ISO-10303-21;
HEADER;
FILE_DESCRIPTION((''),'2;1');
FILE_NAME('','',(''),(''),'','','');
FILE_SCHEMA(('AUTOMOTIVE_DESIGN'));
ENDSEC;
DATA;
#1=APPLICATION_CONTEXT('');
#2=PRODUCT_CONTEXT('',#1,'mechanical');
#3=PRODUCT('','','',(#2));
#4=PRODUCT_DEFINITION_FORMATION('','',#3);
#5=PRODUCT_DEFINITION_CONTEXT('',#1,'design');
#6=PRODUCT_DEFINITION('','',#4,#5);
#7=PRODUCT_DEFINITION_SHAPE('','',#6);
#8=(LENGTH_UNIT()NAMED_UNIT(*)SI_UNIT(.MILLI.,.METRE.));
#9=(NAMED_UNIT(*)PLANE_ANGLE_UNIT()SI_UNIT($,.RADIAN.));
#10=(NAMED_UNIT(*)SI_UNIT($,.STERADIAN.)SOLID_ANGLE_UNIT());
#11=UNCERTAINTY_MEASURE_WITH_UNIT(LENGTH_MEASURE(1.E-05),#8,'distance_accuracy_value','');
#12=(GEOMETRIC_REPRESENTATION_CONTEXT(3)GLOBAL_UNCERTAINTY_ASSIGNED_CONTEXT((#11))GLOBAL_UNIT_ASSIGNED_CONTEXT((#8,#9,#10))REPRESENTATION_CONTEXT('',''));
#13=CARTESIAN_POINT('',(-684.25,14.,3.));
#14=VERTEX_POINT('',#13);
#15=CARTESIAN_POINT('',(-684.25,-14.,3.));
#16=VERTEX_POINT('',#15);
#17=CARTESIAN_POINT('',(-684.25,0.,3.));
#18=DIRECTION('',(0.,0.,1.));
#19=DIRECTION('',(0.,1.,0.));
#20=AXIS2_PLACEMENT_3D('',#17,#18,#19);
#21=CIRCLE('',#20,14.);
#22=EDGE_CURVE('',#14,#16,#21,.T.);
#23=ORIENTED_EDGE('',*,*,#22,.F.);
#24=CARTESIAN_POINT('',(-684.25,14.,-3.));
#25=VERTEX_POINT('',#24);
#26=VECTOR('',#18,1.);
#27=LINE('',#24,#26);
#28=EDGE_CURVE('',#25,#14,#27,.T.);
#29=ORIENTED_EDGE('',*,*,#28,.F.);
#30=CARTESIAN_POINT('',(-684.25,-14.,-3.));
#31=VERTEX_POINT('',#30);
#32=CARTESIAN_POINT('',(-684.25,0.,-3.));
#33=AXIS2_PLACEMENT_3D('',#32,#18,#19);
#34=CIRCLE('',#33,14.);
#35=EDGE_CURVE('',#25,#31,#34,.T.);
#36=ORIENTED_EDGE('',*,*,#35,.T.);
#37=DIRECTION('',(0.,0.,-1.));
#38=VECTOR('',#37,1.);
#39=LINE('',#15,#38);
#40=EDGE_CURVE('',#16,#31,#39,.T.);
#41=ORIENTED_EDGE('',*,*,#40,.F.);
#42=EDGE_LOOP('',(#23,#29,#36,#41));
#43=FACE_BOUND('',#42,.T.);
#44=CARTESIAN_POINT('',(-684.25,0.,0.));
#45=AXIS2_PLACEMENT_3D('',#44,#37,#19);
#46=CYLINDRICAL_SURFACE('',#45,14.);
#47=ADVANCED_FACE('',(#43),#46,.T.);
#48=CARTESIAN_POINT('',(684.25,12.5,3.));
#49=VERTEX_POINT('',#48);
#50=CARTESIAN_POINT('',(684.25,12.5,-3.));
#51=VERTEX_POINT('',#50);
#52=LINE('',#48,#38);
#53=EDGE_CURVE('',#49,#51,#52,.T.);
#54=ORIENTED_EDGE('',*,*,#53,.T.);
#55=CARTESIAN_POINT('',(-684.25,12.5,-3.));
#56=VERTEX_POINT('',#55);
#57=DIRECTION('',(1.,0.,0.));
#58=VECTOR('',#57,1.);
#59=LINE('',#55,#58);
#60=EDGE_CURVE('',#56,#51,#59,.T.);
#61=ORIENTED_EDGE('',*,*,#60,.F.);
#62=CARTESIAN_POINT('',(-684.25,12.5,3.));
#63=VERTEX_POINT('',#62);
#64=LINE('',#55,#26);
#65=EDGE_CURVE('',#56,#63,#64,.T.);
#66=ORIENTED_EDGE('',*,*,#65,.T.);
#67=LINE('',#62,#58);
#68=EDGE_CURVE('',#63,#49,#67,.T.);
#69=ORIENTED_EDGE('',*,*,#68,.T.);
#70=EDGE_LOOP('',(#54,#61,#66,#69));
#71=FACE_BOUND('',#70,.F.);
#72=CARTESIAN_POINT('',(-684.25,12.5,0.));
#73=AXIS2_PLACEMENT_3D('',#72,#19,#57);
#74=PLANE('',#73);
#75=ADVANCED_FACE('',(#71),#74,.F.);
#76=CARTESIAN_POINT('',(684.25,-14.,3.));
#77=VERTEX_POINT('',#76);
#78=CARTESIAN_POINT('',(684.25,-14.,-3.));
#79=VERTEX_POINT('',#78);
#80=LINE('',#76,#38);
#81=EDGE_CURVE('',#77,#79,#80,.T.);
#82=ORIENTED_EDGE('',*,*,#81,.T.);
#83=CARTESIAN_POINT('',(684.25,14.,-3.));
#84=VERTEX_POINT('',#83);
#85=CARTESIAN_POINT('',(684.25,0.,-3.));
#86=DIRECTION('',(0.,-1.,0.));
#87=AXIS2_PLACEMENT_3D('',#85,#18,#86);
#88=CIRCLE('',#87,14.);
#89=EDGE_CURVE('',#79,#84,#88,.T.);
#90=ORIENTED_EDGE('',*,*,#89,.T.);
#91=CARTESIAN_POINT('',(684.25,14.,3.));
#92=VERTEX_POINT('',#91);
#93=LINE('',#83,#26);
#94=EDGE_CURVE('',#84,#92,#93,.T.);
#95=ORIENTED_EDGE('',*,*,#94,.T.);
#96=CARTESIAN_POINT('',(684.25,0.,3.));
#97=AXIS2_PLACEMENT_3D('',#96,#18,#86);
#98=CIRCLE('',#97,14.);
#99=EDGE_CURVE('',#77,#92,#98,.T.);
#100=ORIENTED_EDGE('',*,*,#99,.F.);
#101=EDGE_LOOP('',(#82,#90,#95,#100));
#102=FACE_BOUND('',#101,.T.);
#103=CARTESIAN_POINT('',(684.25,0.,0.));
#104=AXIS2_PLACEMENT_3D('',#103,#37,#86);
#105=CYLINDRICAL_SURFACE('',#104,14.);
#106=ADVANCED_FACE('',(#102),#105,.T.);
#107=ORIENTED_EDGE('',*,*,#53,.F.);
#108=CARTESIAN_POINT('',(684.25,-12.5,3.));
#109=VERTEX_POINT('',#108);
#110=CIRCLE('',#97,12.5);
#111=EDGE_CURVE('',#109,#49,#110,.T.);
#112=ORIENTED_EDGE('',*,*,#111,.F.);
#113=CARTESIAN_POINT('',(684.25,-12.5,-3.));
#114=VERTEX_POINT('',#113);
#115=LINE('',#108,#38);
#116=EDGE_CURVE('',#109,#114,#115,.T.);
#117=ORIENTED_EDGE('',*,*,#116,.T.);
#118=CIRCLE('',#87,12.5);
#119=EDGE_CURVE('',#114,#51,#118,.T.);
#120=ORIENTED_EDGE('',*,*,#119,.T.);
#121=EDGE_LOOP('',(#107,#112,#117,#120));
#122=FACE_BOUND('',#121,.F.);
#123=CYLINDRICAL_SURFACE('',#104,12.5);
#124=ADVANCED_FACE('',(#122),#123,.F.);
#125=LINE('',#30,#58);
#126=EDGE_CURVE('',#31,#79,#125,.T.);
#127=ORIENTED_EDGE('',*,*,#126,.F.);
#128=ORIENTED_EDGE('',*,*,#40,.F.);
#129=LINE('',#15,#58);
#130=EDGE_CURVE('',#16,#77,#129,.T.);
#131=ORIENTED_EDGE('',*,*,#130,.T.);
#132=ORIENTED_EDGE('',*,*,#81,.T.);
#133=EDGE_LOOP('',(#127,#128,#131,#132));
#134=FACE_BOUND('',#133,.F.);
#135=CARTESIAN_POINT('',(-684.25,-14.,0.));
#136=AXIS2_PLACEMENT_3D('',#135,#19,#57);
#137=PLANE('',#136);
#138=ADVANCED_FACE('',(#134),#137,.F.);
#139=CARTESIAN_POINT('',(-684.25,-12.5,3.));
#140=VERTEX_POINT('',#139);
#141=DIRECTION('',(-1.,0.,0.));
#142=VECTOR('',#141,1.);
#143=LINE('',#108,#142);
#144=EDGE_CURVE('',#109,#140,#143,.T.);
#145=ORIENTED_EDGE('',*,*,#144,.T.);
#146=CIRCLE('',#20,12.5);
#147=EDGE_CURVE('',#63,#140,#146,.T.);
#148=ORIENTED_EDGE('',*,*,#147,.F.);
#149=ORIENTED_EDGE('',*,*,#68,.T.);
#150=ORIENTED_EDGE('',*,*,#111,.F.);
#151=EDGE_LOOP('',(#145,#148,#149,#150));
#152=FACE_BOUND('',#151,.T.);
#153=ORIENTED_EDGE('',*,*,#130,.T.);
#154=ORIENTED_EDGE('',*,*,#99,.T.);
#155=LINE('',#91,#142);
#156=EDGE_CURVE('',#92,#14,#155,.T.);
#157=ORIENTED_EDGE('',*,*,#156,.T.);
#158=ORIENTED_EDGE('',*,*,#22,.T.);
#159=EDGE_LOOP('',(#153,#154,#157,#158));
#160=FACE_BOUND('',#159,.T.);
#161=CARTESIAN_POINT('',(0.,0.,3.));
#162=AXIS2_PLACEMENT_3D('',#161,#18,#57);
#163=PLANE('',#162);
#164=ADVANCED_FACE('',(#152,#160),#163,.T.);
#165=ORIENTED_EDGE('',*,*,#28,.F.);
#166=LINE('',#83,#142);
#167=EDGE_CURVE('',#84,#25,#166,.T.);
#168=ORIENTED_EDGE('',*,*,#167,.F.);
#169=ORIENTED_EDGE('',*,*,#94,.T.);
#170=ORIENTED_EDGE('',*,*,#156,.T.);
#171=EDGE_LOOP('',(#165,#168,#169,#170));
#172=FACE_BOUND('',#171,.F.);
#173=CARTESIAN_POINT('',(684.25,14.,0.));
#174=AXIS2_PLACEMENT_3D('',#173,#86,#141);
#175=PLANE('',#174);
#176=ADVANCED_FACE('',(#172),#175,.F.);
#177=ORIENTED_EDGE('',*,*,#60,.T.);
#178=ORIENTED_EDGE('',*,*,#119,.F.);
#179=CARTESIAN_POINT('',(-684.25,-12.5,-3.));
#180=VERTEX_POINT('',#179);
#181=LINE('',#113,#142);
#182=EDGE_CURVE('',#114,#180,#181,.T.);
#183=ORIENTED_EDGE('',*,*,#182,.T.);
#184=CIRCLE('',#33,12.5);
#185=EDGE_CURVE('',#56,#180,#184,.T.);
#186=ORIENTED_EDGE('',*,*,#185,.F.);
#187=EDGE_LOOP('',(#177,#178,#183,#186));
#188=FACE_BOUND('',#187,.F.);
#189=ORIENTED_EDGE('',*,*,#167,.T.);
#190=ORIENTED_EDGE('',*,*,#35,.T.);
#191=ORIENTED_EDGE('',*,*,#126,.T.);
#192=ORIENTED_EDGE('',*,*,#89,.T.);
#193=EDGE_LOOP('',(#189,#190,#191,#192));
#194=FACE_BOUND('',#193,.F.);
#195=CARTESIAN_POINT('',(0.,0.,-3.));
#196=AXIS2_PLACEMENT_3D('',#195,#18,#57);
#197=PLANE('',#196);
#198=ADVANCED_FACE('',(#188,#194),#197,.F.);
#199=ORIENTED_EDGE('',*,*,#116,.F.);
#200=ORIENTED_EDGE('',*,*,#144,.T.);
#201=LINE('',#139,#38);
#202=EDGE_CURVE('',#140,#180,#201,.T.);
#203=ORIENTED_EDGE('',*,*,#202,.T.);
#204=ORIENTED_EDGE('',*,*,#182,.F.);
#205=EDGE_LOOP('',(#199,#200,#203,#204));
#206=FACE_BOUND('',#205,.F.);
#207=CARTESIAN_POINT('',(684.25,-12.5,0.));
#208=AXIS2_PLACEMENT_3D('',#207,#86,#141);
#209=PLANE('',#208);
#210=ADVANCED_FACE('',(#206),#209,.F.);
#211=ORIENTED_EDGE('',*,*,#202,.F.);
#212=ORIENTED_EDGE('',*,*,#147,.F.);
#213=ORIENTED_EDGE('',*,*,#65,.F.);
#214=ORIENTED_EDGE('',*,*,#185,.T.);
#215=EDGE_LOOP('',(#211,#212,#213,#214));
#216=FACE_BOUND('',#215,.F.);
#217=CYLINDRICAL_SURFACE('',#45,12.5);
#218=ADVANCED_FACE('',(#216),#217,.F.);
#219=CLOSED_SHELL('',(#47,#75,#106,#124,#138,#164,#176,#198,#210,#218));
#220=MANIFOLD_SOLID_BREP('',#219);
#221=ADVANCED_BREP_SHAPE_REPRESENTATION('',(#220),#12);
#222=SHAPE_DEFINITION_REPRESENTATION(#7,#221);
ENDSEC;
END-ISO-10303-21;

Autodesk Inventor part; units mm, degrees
ref_plane "YZ Plane" through (0, 0, 0) normal (1, 0, 0) x (0, 1, 0)
ref_plane "XZ Plane" through (0, 0, 0) normal (0, 1, 0) x (-1, 0, 0)
ref_plane "XY Plane" through (0, 0, 0) normal (0, 0, 1) x (1, 0, 0)
sketch "Sketch1" plane through (0, 0, 0) normal (0, 0, 1) x (1, 0, 0)
  line L0 (-684.25, 0) -> (684.25, 0) construction
  arc A0 (684.25, 12.5) -> (684.25, -12.5) centre (684.25, 0) ccw construction
  arc A1 (-684.25, -12.5) -> (-684.25, 12.5) centre (-684.25, 0) ccw construction
  arc A2 (684.25, 14) -> (684.25, -14) centre (684.25, 0) ccw construction
  arc A3 (-684.25, -14) -> (-684.25, 14) centre (-684.25, 0) ccw construction
  line L1 (684.25, 14) -> (-684.25, 14)
  line L2 (-684.25, 12.5) -> (684.25, 12.5)
  line L3 (684.25, -12.5) -> (-684.25, -12.5)
  line L4 (-684.25, -14) -> (684.25, -14)
  arc A4 (684.25, -14) -> (684.25, 14) centre (684.25, 0) ccw
  arc A5 (684.25, -12.5) -> (684.25, 12.5) centre (684.25, 0) ccw
  arc A6 (-684.25, 14) -> (-684.25, -14) centre (-684.25, 0) ccw
  arc A7 (-684.25, 12.5) -> (-684.25, -12.5) centre (-684.25, 0) ccw
  point P0 (0, 0)
  point P1 (0, 0)
  dimension "d0" = 1368.5
  dimension "d1" = 25
  dimension "d5" = 14
extrude "Extrusion1" add sketch "Sketch1" along normal mid plane 6
properties part number "correia-gt2"
